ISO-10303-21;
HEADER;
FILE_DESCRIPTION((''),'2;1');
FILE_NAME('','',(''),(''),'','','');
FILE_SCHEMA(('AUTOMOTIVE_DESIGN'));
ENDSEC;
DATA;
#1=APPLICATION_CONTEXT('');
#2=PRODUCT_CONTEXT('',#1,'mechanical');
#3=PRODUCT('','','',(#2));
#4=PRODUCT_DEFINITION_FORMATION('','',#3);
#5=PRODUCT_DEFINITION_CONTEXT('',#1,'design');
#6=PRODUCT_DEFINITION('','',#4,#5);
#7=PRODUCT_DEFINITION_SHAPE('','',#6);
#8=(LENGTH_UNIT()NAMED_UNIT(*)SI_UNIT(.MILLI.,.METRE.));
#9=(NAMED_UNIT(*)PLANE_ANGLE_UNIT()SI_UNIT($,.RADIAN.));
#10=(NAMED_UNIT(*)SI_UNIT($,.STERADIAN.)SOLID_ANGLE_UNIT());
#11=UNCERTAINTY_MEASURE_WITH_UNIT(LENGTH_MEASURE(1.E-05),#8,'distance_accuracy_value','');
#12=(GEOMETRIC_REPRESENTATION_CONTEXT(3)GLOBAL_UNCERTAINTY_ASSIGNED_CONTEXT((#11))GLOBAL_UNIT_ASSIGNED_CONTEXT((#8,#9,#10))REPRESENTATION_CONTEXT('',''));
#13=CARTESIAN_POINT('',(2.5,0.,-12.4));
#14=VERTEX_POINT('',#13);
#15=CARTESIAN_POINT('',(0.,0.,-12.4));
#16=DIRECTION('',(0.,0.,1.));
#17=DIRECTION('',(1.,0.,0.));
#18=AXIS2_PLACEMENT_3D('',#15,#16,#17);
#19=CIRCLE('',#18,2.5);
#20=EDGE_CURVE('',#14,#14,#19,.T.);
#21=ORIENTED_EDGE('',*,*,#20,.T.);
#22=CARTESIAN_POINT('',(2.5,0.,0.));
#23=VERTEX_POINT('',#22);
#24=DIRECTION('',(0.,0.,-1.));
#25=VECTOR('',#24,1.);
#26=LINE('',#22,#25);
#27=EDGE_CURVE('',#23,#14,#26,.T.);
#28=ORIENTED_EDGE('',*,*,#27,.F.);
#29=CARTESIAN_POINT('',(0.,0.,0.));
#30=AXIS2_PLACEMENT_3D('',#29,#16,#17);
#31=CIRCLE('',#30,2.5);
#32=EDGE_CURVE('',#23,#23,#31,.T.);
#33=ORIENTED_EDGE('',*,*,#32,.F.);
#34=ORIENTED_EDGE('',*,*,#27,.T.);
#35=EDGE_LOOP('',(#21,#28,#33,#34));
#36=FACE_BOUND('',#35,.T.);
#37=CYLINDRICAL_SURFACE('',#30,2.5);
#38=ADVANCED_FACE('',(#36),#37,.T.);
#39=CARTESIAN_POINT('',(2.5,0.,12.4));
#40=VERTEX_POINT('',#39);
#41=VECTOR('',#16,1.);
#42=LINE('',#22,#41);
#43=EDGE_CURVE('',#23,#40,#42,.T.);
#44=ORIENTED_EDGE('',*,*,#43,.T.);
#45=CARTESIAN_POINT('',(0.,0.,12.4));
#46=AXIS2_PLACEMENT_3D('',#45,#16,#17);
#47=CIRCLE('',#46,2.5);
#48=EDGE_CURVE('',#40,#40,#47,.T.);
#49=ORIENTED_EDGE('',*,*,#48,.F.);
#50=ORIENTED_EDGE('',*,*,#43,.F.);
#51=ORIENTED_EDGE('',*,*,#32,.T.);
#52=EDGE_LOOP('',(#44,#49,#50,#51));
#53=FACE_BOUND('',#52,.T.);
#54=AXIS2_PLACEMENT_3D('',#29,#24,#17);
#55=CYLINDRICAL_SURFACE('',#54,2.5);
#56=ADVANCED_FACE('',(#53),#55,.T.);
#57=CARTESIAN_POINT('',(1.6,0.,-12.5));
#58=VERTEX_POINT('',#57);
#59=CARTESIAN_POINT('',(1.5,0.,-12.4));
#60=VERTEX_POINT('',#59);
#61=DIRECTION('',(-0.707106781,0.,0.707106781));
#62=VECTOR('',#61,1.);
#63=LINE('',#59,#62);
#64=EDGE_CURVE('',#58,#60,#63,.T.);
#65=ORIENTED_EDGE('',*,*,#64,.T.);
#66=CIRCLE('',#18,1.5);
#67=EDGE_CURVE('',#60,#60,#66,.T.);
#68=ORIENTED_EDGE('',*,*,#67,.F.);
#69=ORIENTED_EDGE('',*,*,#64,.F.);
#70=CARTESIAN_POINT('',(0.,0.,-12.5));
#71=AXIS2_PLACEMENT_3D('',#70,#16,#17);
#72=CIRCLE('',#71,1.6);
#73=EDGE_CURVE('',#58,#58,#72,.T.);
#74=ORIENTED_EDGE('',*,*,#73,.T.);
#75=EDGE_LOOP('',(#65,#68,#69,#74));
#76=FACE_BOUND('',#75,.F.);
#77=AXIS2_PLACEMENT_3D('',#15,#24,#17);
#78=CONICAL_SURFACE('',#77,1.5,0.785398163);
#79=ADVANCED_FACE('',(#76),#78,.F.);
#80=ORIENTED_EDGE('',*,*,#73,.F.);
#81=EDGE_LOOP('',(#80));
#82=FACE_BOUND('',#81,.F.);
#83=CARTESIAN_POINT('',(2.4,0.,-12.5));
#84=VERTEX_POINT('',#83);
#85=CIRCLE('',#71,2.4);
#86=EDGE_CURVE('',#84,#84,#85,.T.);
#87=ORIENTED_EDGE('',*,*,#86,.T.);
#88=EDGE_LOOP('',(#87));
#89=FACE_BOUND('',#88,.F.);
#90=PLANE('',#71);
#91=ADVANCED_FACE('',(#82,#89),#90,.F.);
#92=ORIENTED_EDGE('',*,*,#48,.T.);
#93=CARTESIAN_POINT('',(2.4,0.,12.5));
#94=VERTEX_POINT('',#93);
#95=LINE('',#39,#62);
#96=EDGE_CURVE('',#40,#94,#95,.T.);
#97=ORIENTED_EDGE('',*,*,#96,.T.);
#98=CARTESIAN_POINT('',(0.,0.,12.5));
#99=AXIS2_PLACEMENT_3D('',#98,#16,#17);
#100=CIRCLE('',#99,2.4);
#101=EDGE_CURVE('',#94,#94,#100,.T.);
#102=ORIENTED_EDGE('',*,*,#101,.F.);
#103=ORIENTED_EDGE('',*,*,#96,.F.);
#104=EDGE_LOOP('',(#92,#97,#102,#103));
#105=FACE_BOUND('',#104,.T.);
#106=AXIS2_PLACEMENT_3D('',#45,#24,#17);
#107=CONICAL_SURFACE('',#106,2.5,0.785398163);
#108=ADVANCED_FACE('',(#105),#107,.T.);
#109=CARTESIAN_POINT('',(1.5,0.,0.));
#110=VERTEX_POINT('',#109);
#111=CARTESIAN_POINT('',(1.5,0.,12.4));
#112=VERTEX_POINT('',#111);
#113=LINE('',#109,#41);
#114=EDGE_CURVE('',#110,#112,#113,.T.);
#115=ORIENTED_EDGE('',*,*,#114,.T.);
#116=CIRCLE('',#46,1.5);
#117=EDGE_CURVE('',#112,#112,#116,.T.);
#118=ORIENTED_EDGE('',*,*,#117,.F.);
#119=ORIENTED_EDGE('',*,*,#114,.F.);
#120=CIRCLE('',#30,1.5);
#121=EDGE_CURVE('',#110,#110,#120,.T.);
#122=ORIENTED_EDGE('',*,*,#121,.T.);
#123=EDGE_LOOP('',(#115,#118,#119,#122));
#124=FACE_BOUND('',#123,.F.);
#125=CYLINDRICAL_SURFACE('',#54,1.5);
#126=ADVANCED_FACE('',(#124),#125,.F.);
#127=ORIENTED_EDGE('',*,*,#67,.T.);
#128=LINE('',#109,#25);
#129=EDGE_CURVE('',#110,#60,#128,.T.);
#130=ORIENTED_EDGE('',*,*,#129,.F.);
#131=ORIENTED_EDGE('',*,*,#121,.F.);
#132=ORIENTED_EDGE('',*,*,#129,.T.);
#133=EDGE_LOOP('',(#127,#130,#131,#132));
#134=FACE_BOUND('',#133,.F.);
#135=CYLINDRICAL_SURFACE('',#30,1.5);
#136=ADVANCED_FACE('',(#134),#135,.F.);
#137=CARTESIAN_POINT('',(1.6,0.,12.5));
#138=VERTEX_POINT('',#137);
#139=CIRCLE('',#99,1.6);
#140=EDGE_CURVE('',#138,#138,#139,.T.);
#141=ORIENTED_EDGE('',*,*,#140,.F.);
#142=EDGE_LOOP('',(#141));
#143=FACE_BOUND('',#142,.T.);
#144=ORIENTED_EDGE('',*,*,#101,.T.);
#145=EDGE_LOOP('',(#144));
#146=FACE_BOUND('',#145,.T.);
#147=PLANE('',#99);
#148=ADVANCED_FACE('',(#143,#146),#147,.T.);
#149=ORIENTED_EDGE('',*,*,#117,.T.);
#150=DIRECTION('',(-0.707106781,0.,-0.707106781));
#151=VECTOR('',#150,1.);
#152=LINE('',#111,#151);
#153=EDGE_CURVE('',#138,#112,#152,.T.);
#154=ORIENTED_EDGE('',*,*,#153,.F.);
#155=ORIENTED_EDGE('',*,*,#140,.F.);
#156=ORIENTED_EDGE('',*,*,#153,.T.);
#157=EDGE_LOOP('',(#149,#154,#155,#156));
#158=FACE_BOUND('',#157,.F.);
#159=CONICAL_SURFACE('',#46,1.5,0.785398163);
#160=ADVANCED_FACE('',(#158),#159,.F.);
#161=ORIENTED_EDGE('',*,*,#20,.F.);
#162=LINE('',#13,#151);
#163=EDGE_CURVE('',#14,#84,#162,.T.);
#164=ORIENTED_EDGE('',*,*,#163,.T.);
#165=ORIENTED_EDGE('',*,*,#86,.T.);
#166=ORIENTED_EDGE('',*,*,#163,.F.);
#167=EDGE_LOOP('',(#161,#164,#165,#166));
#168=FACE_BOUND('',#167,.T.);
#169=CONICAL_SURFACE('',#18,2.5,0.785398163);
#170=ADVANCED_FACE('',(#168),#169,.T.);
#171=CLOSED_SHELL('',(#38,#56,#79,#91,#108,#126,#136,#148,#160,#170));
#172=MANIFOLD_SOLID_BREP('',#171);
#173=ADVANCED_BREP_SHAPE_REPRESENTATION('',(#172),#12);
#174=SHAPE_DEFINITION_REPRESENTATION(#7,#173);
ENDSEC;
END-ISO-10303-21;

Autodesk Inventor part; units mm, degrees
ref_plane "YZ Plane" through (0, 0, 0) normal (1, 0, 0) x (0, 1, 0)
ref_plane "XZ Plane" through (0, 0, 0) normal (0, 1, 0) x (-1, 0, 0)
ref_plane "XY Plane" through (0, 0, 0) normal (0, 0, 1) x (1, 0, 0)
sketch "Sketch1" plane through (0, 0, 0) normal (0, 0, 1) x (1, 0, 0)
  circle A0 centre (0, 0) radius 2.5
  circle A1 centre (0, 0) radius 1.5
  dimension "d0" = 5
  dimension "d1" = 3
extrude "Extrusion1" add sketch "Sketch1" along normal mid plane 25
thread "Thread1" size "M3x0.5" class "6H" standard "ANSI Metric M Profile" length 10
thread "Thread2" size "M3x0.5" class "6H" standard "ANSI Metric M Profile" length 10
chamfer "Chamfer1" distance 0.1 angle 45 4 edges at (-2.5, 0, 12.5) (-1.5, 0, 12.5) (-1.5, 0, -12.5) (-2.5, 0, -12.5)
properties part number "M3 25mm Standoff" material "Aluminum 6061"
